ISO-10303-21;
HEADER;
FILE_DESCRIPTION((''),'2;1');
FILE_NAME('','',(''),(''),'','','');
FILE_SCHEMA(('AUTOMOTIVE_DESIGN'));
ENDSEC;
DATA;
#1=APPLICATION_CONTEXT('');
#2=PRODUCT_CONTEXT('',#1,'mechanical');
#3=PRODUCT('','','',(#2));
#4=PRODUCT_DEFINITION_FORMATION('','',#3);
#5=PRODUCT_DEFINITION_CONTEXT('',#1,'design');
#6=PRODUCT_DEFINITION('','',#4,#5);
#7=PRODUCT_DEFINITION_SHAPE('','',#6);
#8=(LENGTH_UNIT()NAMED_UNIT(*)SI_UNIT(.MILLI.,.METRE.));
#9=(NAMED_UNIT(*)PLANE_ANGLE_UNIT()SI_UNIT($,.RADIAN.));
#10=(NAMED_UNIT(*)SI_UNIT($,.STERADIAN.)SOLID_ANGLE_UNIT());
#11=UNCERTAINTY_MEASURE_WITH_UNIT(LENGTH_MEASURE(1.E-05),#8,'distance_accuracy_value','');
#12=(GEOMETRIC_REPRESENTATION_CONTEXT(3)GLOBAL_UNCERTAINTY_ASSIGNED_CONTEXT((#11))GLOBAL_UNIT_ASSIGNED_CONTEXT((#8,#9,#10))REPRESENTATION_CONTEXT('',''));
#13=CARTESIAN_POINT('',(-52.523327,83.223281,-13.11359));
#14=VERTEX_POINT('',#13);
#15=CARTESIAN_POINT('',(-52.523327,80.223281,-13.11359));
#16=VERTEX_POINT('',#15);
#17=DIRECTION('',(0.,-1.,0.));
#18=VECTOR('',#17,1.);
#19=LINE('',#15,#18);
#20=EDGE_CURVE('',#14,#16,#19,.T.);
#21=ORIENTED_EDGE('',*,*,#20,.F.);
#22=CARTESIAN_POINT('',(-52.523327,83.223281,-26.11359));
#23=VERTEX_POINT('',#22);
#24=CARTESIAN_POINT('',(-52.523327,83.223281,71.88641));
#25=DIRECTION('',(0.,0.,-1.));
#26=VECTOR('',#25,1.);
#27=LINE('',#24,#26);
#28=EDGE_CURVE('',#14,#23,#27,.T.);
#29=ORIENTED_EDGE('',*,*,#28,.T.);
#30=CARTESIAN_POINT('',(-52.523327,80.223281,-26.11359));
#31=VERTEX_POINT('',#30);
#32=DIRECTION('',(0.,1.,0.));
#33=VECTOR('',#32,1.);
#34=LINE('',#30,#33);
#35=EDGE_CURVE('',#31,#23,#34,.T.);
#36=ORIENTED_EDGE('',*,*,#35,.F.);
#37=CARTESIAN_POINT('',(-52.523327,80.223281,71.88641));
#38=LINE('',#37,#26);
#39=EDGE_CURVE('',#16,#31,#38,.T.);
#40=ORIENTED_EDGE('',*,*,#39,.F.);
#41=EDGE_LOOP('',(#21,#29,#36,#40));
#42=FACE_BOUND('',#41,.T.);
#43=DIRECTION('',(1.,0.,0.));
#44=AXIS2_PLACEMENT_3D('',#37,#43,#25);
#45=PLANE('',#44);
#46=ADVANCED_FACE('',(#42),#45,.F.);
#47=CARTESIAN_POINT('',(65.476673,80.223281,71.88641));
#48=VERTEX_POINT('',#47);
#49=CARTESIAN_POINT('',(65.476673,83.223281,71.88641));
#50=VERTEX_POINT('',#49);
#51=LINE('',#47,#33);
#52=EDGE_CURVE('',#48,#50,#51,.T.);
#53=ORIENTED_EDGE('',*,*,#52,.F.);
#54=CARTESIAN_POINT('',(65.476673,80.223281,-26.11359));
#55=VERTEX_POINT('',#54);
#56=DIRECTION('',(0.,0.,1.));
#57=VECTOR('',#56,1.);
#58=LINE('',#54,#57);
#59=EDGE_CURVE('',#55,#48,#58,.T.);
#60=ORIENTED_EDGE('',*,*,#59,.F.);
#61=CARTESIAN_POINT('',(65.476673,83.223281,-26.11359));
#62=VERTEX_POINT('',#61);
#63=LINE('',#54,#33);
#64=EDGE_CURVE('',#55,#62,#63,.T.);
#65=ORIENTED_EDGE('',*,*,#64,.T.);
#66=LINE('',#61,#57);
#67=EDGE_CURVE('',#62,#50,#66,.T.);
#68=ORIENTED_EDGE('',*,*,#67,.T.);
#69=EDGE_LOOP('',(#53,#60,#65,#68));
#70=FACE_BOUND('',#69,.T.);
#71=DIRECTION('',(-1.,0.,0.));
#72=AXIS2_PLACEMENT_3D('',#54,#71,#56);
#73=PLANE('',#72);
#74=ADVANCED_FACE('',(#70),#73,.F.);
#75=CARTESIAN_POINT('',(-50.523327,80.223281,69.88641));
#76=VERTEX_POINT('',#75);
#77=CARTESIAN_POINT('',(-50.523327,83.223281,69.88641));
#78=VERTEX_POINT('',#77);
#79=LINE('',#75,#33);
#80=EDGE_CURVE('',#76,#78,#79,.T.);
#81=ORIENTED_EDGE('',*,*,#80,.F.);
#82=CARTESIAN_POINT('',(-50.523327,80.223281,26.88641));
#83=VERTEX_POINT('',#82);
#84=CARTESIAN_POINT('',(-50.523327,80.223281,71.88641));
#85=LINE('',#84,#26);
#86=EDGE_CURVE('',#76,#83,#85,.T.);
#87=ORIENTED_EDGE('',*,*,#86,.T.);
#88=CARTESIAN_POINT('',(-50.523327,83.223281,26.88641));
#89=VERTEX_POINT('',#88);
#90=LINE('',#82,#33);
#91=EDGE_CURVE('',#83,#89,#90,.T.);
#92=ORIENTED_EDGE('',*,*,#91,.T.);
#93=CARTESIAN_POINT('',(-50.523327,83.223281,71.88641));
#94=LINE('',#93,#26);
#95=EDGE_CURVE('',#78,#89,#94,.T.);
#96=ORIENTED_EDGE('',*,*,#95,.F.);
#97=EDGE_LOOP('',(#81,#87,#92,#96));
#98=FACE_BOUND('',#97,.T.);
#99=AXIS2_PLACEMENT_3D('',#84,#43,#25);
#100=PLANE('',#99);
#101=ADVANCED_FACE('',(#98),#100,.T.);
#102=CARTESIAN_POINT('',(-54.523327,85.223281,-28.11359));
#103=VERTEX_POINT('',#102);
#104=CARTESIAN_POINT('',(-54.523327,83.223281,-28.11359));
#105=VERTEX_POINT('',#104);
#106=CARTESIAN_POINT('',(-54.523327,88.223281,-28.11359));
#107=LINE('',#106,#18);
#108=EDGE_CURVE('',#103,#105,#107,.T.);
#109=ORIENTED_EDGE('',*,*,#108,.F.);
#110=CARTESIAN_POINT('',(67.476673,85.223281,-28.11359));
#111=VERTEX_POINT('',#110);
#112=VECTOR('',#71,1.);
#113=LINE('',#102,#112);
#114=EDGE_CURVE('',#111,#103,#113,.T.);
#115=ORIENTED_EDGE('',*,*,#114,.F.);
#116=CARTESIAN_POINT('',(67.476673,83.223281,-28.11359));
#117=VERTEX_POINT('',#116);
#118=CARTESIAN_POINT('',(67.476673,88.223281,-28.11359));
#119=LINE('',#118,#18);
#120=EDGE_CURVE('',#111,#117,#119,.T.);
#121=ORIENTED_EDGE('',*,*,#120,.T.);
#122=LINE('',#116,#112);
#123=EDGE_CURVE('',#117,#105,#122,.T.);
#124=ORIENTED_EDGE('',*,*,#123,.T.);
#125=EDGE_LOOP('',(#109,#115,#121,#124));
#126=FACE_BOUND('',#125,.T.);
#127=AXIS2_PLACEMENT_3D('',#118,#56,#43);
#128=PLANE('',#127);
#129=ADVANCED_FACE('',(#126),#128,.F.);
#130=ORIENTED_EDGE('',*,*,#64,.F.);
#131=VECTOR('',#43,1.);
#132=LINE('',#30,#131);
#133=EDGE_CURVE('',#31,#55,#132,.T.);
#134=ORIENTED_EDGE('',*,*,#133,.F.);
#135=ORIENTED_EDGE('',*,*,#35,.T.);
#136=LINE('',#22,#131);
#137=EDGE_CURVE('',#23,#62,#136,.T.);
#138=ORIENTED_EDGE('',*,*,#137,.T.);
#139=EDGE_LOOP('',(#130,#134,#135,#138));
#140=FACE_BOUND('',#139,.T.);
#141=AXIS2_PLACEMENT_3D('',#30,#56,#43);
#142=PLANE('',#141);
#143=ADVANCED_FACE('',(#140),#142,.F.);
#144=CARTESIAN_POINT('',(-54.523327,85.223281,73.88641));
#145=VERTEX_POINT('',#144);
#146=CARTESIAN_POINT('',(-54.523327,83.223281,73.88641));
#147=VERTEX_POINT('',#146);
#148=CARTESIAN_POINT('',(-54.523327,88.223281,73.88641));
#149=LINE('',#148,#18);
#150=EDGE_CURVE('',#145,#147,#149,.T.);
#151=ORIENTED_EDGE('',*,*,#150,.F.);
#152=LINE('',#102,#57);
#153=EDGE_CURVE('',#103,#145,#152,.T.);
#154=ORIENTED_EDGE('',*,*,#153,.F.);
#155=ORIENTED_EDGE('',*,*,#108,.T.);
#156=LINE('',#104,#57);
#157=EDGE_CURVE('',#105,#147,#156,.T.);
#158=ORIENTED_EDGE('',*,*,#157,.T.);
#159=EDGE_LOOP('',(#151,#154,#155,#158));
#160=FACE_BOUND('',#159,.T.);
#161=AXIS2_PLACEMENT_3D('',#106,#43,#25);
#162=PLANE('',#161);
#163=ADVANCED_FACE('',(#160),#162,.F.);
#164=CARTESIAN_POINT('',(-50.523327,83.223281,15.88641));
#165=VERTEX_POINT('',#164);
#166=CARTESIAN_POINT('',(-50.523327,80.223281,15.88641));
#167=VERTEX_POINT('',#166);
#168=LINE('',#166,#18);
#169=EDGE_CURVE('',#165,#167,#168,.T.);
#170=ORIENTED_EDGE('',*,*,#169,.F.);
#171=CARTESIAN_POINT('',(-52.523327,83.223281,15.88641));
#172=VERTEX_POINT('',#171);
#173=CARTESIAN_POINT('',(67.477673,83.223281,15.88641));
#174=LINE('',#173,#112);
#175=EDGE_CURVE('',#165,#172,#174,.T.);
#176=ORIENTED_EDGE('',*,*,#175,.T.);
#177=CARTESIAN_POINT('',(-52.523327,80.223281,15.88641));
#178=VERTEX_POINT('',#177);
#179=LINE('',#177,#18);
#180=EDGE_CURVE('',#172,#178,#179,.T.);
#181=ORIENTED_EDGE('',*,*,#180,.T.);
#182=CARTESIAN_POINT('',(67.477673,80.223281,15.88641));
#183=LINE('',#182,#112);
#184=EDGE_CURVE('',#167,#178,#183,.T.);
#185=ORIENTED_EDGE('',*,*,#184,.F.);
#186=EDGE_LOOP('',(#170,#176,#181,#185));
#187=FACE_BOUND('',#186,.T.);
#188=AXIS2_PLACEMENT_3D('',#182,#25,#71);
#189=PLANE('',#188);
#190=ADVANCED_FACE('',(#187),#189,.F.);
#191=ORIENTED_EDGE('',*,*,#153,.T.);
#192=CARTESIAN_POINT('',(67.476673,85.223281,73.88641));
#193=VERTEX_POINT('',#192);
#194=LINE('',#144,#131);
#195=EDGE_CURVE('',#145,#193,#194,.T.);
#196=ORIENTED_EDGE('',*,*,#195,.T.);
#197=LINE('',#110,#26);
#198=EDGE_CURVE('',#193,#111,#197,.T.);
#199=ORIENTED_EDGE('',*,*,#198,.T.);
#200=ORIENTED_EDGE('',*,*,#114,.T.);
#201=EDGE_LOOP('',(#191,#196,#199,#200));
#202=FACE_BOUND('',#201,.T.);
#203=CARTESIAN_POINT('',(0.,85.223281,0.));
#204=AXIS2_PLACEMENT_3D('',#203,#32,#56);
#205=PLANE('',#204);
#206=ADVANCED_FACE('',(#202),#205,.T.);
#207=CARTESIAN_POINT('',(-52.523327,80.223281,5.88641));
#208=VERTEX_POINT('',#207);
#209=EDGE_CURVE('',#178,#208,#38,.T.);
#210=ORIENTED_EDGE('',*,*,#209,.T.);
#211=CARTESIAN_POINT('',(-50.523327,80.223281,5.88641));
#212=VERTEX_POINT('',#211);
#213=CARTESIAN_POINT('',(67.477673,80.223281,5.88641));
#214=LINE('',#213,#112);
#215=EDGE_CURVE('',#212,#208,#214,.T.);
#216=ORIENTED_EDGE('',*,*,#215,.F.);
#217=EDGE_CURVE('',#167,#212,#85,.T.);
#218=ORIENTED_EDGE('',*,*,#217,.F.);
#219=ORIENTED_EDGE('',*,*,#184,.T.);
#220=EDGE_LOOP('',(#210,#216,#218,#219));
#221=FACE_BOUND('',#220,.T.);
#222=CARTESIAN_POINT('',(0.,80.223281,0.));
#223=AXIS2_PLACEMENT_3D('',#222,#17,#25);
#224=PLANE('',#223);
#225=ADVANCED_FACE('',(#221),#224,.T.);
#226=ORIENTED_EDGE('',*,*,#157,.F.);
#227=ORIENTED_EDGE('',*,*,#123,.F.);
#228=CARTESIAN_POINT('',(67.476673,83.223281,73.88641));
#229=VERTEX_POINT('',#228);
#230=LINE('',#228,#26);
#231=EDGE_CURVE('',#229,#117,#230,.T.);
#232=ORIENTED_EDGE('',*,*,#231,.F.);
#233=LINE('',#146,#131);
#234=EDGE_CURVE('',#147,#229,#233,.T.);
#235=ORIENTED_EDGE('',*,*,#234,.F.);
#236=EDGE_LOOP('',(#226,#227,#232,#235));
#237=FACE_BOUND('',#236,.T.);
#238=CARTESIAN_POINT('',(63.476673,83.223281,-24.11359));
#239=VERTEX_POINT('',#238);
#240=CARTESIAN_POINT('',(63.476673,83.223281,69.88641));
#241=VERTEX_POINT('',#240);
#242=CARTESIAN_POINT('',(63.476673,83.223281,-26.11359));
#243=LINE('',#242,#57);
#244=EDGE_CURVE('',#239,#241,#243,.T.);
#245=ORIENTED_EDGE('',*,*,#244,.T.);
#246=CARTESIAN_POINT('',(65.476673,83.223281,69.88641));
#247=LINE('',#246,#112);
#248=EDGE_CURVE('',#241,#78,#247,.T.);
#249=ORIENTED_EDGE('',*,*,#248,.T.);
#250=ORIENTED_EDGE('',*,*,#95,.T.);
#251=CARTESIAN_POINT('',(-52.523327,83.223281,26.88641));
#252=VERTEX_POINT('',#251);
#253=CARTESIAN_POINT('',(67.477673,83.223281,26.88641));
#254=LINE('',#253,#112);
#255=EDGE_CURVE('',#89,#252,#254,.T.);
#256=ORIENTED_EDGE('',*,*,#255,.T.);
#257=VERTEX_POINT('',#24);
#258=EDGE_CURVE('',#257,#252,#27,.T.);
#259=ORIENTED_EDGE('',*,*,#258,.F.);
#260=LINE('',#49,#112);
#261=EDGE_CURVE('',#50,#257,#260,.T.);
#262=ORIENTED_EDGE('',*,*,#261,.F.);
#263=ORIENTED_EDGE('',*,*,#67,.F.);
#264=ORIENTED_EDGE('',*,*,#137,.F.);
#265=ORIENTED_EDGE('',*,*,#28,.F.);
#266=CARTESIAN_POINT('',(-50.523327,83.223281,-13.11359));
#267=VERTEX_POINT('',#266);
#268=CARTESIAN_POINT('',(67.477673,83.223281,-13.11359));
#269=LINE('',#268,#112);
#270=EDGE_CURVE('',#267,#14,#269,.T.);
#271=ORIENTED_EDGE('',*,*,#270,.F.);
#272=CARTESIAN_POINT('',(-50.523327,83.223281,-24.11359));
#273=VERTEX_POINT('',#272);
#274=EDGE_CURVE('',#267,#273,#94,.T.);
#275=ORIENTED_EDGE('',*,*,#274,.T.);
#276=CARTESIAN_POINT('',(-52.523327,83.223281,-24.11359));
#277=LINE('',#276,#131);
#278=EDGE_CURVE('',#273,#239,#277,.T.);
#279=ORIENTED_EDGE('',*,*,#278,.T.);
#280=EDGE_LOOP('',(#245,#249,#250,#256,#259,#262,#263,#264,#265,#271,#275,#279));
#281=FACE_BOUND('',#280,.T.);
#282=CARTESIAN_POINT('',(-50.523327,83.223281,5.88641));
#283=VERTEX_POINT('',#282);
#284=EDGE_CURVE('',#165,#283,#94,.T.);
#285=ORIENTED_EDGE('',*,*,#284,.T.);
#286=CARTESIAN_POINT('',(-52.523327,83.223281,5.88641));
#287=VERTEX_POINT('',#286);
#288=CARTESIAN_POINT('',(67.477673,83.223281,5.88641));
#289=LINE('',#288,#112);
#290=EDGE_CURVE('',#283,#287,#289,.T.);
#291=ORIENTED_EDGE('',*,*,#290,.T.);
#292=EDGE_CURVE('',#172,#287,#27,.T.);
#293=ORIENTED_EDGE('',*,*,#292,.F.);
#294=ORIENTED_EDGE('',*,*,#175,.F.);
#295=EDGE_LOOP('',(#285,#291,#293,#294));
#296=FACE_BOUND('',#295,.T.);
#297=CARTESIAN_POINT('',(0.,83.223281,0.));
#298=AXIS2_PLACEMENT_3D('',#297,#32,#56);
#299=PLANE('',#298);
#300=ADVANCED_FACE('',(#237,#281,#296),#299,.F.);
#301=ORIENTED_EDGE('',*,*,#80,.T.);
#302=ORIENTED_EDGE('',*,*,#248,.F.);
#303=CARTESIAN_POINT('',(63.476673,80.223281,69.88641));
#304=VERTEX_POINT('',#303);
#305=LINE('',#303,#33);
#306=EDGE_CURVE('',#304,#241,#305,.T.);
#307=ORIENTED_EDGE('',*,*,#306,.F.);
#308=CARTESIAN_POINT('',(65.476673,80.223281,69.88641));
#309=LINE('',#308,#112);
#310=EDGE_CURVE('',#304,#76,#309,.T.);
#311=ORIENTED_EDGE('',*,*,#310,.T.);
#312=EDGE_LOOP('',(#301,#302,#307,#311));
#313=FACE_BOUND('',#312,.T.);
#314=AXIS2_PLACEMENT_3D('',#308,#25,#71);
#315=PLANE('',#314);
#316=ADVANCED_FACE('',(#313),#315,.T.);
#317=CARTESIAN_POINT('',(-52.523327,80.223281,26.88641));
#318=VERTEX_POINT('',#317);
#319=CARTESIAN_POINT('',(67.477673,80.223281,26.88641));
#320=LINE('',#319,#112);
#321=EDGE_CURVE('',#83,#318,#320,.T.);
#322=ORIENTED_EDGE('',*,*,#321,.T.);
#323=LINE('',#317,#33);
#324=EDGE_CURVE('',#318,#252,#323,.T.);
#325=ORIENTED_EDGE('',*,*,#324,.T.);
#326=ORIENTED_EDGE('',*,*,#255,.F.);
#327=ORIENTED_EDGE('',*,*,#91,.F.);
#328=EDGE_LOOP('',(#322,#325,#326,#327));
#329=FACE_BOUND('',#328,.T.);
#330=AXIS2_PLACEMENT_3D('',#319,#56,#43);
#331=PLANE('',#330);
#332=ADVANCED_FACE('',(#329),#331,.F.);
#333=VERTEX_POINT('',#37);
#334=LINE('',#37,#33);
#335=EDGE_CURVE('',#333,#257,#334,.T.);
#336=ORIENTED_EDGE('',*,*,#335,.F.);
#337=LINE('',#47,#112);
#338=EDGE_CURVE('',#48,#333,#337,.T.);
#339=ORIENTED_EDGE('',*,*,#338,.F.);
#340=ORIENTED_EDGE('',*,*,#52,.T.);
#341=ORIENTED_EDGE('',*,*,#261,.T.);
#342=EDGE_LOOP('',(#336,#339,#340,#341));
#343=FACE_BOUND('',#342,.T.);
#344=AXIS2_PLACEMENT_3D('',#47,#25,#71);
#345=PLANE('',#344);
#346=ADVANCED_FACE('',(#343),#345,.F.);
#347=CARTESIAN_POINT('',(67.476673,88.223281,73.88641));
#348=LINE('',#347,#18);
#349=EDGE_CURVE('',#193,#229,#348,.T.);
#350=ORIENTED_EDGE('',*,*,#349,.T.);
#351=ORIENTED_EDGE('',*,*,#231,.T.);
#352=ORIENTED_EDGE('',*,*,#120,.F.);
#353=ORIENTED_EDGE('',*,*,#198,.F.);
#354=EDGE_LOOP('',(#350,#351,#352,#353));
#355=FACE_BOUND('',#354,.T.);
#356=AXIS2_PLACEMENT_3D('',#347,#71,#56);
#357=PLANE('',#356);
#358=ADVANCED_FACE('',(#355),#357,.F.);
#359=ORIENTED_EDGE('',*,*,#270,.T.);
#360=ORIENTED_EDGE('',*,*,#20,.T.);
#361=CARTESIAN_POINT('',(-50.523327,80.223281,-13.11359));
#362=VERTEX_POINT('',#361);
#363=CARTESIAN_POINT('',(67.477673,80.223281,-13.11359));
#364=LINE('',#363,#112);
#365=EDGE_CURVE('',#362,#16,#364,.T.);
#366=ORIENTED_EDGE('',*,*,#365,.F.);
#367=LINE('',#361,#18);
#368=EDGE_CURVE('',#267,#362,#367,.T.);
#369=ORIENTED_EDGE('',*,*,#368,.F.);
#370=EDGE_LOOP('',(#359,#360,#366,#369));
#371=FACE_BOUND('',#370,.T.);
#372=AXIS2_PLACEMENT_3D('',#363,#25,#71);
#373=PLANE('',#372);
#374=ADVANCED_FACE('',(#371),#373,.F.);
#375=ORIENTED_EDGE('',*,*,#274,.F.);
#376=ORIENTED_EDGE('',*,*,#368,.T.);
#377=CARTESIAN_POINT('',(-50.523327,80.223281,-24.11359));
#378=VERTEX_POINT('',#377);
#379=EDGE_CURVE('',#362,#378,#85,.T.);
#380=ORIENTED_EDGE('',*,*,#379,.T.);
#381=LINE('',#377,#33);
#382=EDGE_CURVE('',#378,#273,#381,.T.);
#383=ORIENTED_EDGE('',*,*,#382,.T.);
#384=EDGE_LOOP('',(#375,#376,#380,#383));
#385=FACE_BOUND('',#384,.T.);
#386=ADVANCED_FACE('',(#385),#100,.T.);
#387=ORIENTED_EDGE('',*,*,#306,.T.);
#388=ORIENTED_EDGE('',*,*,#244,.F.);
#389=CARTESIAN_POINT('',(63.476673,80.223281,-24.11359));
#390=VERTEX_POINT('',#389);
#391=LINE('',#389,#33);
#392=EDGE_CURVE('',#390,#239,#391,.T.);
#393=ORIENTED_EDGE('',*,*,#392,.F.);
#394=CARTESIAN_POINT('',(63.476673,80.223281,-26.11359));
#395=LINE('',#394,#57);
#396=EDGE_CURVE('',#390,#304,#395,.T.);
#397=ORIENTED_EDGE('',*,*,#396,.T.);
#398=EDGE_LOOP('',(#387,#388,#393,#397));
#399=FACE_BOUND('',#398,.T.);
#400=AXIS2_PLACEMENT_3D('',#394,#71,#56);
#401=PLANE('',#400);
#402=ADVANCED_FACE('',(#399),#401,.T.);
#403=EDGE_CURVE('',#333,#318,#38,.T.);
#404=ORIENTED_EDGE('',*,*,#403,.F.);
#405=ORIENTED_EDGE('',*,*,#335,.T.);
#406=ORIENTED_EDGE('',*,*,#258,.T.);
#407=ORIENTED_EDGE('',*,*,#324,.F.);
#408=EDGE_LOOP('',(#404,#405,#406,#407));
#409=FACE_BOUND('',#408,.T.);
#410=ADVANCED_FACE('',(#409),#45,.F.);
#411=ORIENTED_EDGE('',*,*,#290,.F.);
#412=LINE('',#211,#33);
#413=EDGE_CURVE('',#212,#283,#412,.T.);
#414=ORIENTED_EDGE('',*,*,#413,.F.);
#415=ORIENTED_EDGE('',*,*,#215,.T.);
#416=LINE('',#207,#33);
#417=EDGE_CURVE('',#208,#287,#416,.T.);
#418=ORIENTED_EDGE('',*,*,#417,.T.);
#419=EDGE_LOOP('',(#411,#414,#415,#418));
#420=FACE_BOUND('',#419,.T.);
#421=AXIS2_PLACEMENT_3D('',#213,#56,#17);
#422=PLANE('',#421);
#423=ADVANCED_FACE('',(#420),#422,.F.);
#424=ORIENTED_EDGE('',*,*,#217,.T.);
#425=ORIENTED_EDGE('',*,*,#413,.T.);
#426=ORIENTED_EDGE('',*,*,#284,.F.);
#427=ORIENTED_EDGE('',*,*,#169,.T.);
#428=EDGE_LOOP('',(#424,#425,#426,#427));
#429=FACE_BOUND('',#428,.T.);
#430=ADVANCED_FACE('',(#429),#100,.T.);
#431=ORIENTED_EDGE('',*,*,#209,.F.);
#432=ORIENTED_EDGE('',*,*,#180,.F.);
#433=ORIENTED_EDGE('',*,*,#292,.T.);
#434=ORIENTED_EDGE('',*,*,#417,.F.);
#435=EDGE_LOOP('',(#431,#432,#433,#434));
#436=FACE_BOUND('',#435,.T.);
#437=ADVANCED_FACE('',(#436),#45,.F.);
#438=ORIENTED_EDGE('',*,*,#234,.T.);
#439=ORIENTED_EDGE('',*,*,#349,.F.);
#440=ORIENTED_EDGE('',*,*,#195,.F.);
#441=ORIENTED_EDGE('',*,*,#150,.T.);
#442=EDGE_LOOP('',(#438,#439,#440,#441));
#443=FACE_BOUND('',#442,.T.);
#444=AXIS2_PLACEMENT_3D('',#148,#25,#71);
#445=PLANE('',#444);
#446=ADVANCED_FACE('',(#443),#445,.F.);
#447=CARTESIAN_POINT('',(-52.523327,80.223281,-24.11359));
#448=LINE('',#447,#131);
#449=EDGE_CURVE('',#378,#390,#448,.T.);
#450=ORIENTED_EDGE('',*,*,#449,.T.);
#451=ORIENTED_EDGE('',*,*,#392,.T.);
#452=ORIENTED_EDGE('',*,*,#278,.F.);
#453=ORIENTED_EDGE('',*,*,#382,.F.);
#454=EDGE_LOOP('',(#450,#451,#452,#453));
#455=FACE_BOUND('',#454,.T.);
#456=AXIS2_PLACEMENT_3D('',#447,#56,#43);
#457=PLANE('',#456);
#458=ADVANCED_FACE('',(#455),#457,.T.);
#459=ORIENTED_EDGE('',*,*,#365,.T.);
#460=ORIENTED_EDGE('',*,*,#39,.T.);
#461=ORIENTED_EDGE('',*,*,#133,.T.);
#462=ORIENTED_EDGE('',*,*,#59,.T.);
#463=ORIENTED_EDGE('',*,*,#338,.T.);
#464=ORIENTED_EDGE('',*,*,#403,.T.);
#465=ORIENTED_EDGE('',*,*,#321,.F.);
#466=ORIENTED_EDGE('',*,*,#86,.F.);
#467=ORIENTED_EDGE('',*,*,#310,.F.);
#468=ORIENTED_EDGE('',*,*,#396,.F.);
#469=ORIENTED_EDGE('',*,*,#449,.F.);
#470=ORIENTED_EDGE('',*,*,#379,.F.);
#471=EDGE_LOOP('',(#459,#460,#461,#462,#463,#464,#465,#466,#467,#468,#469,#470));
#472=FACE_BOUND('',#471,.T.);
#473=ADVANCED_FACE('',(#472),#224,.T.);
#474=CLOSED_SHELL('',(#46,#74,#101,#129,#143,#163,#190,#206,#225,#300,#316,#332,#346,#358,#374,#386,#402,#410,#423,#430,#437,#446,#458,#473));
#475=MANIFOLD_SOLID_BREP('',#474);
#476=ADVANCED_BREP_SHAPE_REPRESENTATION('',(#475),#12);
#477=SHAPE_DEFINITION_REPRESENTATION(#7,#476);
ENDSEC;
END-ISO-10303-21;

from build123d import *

# Parameters (mm, degrees)
STOCK_BOX_1_START         = 83.223281248
STOCK_BOX_1_OUTLINE_W     = 122
STOCK_BOX_1_OUTLINE_H     = 102
STOCK_BOX_1_DEPTH         = 5
STOCK_BOX_1_START_2       = 80.223281248
STOCK_BOX_1_2_OUTLINE_W   = 118
STOCK_BOX_1_2_OUTLINE_H   = 98
STOCK_BOX_1_2_OUTLINE_W_2 = 114
STOCK_BOX_1_2_OUTLINE_H_2 = 94
STOCK_BOX_1_2_DEPTH       = 3
CUT_EXTRUDE2_REACH        = 168.26
SKETCH2_W                 = 19
SKETCH2_H                 = 3
SKETCH2_W_2               = 11
SKETCH3_W                 = 122
SKETCH3_H                 = 102
BOSS_EXTRUDE1_DEPTH       = 3
SKETCH4_W                 = 122
SKETCH4_H                 = 102
CUT_EXTRUDE3_DEPTH        = 3


# Read off the part's stored shape, not the designer's step: Stock-Box-1
with BuildPart() as part:
    # Stock-Box-1 outline → Stock-Box-1 (new body)
    with BuildSketch(Plane(origin=(0, 0, 0), x_dir=(1, 0, 0), z_dir=(0, 1, 0)).offset(STOCK_BOX_1_START)):
        with Locations((6.476673428, -22.886409736)):
            Rectangle(STOCK_BOX_1_OUTLINE_W, STOCK_BOX_1_OUTLINE_H)
    extrude(amount=STOCK_BOX_1_DEPTH)

    # Stock-Box-1 2 outline → Stock-Box-1 2 (add)
    with BuildSketch(Plane(origin=(0, 0, 0), x_dir=(1, 0, 0), z_dir=(0, 1, 0)).offset(STOCK_BOX_1_START_2)):
        with Locations((6.476673428, -22.886409736)):
            Rectangle(STOCK_BOX_1_2_OUTLINE_W, STOCK_BOX_1_2_OUTLINE_H)
        with Locations((6.476673428, -22.886409736)):
            Rectangle(STOCK_BOX_1_2_OUTLINE_W_2, STOCK_BOX_1_2_OUTLINE_H_2, mode=Mode.SUBTRACT)
    extrude(amount=STOCK_BOX_1_2_DEPTH)

    # Sketch2 → Cut-Extrude2 (cut, up to next)
    with BuildSketch(Plane.ZY.offset(52.523326572), mode=Mode.PRIVATE) as cut_extrude2_sk1:
        with Locations((-3.613590264, 81.723281248)):
            Rectangle(SKETCH2_W, SKETCH2_H)
    cut_extrude2_tool1 = extrude(cut_extrude2_sk1.sketch, amount=-CUT_EXTRUDE2_REACH, mode=Mode.PRIVATE) & part.part
    # Sketch2 → Cut-Extrude2 (cut, up to next)
    with BuildSketch(Plane.ZY.offset(52.523326572), mode=Mode.PRIVATE) as cut_extrude2_sk2:
        with Locations((21.386409736, 81.723281248)):
            Rectangle(SKETCH2_W_2, SKETCH2_H)
    cut_extrude2_tool2 = extrude(cut_extrude2_sk2.sketch, amount=-CUT_EXTRUDE2_REACH, mode=Mode.PRIVATE) & part.part
    add(cut_extrude2_tool1.solids().sort_by_distance((-52.523327, 81.723281, -3.61359))[0], mode=Mode.SUBTRACT)
    add(cut_extrude2_tool2.solids().sort_by_distance((-52.523327, 81.723281, 21.38641))[0], mode=Mode.SUBTRACT)

    # Sketch3 → Boss-Extrude1 (add)
    with BuildSketch(Plane(origin=(0, 88.223281248, 0), x_dir=(1, 0, 0), z_dir=(0, 1, 0))):
        with Locations((6.476673428, -22.886409736)):
            Rectangle(SKETCH3_W, SKETCH3_H)
    extrude(amount=-BOSS_EXTRUDE1_DEPTH)

    # Sketch4 → Cut-Extrude3 (cut)
    with BuildSketch(Plane(origin=(0, 88.223281248, 0), x_dir=(1, 0, 0), z_dir=(0, 1, 0))):
        with Locations((6.476673428, -22.886409736)):
            Rectangle(SKETCH4_W, SKETCH4_H)
    extrude(amount=-CUT_EXTRUDE3_DEPTH, mode=Mode.SUBTRACT)


solid = part.part
